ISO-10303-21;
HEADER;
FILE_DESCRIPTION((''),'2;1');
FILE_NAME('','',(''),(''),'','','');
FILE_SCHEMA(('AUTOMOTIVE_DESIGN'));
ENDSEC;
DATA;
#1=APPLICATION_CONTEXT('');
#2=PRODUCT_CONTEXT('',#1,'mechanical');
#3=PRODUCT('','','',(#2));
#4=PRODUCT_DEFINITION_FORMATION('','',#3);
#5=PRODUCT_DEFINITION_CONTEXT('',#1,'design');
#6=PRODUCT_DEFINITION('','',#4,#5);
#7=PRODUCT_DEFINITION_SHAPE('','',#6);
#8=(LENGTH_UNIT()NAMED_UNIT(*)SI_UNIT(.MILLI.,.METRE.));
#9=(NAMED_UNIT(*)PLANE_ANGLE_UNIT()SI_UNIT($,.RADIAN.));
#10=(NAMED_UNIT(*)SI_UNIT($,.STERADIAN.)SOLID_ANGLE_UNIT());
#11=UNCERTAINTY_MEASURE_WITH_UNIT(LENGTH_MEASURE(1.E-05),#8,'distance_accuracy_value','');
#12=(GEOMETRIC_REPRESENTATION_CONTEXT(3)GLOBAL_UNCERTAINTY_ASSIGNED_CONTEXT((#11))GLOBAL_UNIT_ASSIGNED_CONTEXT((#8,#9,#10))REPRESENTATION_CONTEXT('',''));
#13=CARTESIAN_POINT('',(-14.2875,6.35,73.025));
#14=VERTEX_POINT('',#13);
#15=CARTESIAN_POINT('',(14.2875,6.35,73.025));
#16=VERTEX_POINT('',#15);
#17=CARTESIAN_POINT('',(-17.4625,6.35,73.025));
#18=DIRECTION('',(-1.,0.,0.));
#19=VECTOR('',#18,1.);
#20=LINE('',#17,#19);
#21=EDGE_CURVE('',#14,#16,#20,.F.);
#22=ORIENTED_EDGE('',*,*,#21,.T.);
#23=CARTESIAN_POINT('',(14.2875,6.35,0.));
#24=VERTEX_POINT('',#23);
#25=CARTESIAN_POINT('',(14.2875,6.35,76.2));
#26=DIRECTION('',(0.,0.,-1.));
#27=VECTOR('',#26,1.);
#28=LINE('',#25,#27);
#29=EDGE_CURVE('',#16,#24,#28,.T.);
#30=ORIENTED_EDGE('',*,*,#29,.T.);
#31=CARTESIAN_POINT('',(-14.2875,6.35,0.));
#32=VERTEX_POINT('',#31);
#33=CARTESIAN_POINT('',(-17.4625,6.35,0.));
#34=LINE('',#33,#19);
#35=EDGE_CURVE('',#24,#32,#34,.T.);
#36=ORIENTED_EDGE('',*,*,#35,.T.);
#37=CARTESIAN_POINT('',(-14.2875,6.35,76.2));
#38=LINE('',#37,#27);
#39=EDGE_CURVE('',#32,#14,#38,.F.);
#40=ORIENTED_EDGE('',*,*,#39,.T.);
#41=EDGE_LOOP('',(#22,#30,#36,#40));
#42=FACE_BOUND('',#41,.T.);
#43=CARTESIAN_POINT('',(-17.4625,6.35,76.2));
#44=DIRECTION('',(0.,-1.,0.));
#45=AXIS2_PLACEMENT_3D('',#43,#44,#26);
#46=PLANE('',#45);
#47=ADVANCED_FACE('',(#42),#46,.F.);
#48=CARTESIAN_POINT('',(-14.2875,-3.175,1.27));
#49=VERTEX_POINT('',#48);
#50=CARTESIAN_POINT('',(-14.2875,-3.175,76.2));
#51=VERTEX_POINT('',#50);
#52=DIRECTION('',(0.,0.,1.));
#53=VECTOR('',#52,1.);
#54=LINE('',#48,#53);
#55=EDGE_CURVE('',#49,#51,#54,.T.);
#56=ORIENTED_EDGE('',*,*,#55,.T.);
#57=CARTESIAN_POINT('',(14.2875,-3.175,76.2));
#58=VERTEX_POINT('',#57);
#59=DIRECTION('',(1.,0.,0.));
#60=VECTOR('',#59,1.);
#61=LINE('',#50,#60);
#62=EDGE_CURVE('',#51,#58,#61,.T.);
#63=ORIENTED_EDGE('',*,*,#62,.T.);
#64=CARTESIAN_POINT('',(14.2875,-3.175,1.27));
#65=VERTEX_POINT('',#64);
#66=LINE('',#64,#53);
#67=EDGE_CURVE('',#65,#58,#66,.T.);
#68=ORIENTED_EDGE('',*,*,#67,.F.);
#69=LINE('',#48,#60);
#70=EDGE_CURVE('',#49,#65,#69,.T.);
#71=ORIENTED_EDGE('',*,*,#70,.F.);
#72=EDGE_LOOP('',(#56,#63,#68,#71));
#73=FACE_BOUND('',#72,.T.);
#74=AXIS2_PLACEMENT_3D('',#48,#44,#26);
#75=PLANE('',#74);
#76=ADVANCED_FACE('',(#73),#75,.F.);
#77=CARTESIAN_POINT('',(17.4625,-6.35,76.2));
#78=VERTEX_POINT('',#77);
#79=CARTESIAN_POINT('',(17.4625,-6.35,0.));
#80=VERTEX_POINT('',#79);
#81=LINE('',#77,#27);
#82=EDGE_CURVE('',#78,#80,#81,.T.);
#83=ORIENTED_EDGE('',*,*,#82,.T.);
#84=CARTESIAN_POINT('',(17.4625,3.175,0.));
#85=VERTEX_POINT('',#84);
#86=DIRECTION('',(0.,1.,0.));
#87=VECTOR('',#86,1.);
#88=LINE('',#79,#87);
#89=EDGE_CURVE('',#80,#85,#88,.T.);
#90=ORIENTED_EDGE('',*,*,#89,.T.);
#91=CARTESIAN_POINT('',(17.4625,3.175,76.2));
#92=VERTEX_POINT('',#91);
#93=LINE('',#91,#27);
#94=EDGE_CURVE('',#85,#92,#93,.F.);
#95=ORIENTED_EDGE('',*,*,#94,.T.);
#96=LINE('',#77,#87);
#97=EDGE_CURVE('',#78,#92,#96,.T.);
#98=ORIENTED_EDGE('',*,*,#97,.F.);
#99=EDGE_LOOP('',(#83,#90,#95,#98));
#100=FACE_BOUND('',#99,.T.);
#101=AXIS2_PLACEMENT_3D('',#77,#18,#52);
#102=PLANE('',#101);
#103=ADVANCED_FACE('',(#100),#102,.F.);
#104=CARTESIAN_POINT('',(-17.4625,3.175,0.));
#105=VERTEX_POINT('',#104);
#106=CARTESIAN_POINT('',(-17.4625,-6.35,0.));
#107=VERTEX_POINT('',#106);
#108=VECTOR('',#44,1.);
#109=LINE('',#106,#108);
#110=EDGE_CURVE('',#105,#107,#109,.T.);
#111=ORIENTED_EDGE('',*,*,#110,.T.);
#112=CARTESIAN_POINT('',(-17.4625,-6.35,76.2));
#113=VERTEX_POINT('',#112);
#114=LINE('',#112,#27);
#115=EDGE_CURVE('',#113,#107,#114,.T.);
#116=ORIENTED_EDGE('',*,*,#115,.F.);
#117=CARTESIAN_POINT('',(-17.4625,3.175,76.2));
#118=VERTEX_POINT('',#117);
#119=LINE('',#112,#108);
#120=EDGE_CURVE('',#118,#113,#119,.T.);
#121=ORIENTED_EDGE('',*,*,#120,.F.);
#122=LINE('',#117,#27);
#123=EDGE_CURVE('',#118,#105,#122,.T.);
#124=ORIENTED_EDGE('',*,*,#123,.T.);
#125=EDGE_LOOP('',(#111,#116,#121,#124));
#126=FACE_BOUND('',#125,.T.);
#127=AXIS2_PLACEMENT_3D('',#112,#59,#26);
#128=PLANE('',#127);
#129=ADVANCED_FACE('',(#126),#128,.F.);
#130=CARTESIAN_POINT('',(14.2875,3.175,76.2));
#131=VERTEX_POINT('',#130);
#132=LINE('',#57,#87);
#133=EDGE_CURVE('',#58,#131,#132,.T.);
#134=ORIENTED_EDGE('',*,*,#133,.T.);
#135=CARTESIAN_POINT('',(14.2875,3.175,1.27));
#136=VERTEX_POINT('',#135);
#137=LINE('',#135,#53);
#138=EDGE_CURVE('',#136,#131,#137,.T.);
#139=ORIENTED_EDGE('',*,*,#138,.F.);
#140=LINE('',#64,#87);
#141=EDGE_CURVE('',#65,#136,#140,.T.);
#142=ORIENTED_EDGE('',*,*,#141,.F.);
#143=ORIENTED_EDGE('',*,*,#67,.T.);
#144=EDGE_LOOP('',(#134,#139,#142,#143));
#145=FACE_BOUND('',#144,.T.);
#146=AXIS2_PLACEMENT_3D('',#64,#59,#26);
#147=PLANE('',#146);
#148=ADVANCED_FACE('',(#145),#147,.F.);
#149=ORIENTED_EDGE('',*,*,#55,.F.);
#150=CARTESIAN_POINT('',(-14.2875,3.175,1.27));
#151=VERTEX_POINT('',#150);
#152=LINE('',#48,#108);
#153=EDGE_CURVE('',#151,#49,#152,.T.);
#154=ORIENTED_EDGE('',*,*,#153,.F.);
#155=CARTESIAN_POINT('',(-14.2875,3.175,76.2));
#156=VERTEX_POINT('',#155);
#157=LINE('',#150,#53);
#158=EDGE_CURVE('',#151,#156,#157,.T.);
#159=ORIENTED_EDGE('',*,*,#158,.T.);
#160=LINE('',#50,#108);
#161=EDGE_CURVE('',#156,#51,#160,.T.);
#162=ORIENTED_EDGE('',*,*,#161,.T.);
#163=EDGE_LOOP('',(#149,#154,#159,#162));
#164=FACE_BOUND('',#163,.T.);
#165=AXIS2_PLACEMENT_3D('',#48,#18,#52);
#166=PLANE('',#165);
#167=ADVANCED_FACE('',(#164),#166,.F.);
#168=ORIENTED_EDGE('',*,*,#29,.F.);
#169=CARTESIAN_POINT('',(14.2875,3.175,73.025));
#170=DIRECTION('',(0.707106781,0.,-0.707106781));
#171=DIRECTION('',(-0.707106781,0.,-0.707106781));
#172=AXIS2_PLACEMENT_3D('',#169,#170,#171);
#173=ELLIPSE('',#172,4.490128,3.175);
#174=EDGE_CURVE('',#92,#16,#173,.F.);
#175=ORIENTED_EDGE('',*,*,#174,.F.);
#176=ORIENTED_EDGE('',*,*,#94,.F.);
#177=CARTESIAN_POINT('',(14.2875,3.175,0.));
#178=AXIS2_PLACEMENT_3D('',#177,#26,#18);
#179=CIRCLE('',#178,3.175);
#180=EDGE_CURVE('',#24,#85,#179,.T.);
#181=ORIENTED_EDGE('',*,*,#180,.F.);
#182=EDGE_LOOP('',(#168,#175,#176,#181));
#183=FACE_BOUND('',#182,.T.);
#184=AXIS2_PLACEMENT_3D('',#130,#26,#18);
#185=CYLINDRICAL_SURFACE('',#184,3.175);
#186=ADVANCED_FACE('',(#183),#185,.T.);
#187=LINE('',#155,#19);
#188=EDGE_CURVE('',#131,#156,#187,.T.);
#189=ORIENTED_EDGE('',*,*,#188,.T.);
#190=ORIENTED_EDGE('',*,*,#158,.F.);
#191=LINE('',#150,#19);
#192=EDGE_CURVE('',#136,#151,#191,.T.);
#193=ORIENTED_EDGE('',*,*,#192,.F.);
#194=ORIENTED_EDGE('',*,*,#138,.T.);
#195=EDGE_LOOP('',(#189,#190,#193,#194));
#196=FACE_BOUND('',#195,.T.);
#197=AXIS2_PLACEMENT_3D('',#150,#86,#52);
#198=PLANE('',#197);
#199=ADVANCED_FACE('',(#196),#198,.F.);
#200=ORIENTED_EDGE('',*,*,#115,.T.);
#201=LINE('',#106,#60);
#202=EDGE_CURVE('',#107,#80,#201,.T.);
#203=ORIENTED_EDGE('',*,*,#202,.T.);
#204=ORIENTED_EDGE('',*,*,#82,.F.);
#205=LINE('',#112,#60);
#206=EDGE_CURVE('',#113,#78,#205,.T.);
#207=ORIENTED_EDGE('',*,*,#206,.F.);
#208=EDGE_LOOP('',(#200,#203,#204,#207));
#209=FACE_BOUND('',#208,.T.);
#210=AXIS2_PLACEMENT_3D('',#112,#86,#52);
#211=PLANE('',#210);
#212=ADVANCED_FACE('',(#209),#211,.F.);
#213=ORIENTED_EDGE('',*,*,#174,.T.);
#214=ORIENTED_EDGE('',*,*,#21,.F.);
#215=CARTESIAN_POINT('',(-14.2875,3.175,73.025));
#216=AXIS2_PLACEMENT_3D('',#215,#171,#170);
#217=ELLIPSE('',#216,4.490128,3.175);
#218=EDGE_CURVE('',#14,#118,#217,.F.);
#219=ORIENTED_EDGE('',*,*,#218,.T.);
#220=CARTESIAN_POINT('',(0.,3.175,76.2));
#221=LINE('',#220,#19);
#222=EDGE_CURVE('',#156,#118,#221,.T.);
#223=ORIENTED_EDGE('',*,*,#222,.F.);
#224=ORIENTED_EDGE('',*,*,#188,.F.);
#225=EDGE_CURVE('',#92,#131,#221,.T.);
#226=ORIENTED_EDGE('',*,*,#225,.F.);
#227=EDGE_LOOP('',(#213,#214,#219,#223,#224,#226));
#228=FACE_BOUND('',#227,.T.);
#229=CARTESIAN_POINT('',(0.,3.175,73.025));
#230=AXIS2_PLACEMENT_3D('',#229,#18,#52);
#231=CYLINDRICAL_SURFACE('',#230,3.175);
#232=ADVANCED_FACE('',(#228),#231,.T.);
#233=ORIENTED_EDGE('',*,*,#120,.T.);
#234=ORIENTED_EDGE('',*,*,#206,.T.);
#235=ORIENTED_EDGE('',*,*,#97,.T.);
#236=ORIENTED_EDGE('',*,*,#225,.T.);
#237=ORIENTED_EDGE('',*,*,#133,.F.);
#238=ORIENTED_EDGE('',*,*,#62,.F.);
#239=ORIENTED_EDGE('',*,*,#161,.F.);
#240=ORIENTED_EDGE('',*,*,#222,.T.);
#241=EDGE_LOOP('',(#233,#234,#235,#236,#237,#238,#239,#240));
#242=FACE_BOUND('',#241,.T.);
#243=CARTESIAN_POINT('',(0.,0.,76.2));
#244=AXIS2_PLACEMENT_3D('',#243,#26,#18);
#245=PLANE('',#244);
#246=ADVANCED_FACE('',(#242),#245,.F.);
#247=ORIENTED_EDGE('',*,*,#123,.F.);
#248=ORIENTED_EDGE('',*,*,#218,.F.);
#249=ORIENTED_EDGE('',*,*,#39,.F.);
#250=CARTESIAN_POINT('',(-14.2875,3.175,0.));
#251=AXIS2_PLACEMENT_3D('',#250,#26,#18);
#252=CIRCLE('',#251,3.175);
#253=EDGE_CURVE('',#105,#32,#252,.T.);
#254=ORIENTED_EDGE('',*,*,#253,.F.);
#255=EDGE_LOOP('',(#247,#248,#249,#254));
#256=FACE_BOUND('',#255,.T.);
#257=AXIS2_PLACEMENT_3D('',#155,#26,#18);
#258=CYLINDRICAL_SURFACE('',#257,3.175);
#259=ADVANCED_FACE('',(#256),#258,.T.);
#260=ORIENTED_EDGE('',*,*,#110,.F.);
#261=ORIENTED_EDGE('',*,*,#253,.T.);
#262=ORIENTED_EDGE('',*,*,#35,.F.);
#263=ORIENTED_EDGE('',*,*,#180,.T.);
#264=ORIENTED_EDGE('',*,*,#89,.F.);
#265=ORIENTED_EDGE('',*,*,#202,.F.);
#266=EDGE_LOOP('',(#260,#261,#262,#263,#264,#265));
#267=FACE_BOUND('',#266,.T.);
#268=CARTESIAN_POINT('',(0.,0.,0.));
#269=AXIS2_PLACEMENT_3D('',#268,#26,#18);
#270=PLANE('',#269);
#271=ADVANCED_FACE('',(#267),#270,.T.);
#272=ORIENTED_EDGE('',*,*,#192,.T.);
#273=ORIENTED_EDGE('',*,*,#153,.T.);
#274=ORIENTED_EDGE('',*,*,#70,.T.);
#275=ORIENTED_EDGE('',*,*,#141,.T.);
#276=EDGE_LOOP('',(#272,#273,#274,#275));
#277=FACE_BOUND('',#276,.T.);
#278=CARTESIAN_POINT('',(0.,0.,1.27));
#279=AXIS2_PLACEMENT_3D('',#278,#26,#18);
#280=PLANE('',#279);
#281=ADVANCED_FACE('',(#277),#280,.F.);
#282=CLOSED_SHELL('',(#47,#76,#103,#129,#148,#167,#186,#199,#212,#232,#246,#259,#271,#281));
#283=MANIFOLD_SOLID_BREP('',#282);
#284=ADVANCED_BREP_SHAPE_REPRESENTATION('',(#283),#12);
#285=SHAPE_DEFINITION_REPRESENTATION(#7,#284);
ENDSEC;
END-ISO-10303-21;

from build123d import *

# Parameters (mm, degrees)
SKETCH1_W           = 34.925
SKETCH1_H           = 12.7
BOSS_EXTRUDE1_DEPTH = 76.2
SKETCH2_W           = 28.575
SKETCH2_H           = 6.35
CUT_EXTRUDE1_DEPTH  = 74.93
FILLET1_R           = 3.175


with BuildPart() as part:
    # Sketch1 → Boss-Extrude1 (new body)
    with BuildSketch(Plane.XY):
        Rectangle(SKETCH1_W, SKETCH1_H)
    extrude(amount=BOSS_EXTRUDE1_DEPTH)

    # Sketch2 → Cut-Extrude1 (cut)
    with BuildSketch(Plane.XY.offset(76.2)):
        Rectangle(SKETCH2_W, SKETCH2_H)
    extrude(amount=-CUT_EXTRUDE1_DEPTH, mode=Mode.SUBTRACT)

    # Fillet1
    fillet1_edges = [part.edges().sort_by_distance(p)[0] for p in [
        (-17.4625, 6.35, 38.1),
        (17.4625, 6.35, 38.1),
        (0, 6.35, 76.2),
    ]]
    fillet(fillet1_edges, radius=FILLET1_R - 0.0001)  # a hair under: the kernel refuses the full size


solid = part.part
